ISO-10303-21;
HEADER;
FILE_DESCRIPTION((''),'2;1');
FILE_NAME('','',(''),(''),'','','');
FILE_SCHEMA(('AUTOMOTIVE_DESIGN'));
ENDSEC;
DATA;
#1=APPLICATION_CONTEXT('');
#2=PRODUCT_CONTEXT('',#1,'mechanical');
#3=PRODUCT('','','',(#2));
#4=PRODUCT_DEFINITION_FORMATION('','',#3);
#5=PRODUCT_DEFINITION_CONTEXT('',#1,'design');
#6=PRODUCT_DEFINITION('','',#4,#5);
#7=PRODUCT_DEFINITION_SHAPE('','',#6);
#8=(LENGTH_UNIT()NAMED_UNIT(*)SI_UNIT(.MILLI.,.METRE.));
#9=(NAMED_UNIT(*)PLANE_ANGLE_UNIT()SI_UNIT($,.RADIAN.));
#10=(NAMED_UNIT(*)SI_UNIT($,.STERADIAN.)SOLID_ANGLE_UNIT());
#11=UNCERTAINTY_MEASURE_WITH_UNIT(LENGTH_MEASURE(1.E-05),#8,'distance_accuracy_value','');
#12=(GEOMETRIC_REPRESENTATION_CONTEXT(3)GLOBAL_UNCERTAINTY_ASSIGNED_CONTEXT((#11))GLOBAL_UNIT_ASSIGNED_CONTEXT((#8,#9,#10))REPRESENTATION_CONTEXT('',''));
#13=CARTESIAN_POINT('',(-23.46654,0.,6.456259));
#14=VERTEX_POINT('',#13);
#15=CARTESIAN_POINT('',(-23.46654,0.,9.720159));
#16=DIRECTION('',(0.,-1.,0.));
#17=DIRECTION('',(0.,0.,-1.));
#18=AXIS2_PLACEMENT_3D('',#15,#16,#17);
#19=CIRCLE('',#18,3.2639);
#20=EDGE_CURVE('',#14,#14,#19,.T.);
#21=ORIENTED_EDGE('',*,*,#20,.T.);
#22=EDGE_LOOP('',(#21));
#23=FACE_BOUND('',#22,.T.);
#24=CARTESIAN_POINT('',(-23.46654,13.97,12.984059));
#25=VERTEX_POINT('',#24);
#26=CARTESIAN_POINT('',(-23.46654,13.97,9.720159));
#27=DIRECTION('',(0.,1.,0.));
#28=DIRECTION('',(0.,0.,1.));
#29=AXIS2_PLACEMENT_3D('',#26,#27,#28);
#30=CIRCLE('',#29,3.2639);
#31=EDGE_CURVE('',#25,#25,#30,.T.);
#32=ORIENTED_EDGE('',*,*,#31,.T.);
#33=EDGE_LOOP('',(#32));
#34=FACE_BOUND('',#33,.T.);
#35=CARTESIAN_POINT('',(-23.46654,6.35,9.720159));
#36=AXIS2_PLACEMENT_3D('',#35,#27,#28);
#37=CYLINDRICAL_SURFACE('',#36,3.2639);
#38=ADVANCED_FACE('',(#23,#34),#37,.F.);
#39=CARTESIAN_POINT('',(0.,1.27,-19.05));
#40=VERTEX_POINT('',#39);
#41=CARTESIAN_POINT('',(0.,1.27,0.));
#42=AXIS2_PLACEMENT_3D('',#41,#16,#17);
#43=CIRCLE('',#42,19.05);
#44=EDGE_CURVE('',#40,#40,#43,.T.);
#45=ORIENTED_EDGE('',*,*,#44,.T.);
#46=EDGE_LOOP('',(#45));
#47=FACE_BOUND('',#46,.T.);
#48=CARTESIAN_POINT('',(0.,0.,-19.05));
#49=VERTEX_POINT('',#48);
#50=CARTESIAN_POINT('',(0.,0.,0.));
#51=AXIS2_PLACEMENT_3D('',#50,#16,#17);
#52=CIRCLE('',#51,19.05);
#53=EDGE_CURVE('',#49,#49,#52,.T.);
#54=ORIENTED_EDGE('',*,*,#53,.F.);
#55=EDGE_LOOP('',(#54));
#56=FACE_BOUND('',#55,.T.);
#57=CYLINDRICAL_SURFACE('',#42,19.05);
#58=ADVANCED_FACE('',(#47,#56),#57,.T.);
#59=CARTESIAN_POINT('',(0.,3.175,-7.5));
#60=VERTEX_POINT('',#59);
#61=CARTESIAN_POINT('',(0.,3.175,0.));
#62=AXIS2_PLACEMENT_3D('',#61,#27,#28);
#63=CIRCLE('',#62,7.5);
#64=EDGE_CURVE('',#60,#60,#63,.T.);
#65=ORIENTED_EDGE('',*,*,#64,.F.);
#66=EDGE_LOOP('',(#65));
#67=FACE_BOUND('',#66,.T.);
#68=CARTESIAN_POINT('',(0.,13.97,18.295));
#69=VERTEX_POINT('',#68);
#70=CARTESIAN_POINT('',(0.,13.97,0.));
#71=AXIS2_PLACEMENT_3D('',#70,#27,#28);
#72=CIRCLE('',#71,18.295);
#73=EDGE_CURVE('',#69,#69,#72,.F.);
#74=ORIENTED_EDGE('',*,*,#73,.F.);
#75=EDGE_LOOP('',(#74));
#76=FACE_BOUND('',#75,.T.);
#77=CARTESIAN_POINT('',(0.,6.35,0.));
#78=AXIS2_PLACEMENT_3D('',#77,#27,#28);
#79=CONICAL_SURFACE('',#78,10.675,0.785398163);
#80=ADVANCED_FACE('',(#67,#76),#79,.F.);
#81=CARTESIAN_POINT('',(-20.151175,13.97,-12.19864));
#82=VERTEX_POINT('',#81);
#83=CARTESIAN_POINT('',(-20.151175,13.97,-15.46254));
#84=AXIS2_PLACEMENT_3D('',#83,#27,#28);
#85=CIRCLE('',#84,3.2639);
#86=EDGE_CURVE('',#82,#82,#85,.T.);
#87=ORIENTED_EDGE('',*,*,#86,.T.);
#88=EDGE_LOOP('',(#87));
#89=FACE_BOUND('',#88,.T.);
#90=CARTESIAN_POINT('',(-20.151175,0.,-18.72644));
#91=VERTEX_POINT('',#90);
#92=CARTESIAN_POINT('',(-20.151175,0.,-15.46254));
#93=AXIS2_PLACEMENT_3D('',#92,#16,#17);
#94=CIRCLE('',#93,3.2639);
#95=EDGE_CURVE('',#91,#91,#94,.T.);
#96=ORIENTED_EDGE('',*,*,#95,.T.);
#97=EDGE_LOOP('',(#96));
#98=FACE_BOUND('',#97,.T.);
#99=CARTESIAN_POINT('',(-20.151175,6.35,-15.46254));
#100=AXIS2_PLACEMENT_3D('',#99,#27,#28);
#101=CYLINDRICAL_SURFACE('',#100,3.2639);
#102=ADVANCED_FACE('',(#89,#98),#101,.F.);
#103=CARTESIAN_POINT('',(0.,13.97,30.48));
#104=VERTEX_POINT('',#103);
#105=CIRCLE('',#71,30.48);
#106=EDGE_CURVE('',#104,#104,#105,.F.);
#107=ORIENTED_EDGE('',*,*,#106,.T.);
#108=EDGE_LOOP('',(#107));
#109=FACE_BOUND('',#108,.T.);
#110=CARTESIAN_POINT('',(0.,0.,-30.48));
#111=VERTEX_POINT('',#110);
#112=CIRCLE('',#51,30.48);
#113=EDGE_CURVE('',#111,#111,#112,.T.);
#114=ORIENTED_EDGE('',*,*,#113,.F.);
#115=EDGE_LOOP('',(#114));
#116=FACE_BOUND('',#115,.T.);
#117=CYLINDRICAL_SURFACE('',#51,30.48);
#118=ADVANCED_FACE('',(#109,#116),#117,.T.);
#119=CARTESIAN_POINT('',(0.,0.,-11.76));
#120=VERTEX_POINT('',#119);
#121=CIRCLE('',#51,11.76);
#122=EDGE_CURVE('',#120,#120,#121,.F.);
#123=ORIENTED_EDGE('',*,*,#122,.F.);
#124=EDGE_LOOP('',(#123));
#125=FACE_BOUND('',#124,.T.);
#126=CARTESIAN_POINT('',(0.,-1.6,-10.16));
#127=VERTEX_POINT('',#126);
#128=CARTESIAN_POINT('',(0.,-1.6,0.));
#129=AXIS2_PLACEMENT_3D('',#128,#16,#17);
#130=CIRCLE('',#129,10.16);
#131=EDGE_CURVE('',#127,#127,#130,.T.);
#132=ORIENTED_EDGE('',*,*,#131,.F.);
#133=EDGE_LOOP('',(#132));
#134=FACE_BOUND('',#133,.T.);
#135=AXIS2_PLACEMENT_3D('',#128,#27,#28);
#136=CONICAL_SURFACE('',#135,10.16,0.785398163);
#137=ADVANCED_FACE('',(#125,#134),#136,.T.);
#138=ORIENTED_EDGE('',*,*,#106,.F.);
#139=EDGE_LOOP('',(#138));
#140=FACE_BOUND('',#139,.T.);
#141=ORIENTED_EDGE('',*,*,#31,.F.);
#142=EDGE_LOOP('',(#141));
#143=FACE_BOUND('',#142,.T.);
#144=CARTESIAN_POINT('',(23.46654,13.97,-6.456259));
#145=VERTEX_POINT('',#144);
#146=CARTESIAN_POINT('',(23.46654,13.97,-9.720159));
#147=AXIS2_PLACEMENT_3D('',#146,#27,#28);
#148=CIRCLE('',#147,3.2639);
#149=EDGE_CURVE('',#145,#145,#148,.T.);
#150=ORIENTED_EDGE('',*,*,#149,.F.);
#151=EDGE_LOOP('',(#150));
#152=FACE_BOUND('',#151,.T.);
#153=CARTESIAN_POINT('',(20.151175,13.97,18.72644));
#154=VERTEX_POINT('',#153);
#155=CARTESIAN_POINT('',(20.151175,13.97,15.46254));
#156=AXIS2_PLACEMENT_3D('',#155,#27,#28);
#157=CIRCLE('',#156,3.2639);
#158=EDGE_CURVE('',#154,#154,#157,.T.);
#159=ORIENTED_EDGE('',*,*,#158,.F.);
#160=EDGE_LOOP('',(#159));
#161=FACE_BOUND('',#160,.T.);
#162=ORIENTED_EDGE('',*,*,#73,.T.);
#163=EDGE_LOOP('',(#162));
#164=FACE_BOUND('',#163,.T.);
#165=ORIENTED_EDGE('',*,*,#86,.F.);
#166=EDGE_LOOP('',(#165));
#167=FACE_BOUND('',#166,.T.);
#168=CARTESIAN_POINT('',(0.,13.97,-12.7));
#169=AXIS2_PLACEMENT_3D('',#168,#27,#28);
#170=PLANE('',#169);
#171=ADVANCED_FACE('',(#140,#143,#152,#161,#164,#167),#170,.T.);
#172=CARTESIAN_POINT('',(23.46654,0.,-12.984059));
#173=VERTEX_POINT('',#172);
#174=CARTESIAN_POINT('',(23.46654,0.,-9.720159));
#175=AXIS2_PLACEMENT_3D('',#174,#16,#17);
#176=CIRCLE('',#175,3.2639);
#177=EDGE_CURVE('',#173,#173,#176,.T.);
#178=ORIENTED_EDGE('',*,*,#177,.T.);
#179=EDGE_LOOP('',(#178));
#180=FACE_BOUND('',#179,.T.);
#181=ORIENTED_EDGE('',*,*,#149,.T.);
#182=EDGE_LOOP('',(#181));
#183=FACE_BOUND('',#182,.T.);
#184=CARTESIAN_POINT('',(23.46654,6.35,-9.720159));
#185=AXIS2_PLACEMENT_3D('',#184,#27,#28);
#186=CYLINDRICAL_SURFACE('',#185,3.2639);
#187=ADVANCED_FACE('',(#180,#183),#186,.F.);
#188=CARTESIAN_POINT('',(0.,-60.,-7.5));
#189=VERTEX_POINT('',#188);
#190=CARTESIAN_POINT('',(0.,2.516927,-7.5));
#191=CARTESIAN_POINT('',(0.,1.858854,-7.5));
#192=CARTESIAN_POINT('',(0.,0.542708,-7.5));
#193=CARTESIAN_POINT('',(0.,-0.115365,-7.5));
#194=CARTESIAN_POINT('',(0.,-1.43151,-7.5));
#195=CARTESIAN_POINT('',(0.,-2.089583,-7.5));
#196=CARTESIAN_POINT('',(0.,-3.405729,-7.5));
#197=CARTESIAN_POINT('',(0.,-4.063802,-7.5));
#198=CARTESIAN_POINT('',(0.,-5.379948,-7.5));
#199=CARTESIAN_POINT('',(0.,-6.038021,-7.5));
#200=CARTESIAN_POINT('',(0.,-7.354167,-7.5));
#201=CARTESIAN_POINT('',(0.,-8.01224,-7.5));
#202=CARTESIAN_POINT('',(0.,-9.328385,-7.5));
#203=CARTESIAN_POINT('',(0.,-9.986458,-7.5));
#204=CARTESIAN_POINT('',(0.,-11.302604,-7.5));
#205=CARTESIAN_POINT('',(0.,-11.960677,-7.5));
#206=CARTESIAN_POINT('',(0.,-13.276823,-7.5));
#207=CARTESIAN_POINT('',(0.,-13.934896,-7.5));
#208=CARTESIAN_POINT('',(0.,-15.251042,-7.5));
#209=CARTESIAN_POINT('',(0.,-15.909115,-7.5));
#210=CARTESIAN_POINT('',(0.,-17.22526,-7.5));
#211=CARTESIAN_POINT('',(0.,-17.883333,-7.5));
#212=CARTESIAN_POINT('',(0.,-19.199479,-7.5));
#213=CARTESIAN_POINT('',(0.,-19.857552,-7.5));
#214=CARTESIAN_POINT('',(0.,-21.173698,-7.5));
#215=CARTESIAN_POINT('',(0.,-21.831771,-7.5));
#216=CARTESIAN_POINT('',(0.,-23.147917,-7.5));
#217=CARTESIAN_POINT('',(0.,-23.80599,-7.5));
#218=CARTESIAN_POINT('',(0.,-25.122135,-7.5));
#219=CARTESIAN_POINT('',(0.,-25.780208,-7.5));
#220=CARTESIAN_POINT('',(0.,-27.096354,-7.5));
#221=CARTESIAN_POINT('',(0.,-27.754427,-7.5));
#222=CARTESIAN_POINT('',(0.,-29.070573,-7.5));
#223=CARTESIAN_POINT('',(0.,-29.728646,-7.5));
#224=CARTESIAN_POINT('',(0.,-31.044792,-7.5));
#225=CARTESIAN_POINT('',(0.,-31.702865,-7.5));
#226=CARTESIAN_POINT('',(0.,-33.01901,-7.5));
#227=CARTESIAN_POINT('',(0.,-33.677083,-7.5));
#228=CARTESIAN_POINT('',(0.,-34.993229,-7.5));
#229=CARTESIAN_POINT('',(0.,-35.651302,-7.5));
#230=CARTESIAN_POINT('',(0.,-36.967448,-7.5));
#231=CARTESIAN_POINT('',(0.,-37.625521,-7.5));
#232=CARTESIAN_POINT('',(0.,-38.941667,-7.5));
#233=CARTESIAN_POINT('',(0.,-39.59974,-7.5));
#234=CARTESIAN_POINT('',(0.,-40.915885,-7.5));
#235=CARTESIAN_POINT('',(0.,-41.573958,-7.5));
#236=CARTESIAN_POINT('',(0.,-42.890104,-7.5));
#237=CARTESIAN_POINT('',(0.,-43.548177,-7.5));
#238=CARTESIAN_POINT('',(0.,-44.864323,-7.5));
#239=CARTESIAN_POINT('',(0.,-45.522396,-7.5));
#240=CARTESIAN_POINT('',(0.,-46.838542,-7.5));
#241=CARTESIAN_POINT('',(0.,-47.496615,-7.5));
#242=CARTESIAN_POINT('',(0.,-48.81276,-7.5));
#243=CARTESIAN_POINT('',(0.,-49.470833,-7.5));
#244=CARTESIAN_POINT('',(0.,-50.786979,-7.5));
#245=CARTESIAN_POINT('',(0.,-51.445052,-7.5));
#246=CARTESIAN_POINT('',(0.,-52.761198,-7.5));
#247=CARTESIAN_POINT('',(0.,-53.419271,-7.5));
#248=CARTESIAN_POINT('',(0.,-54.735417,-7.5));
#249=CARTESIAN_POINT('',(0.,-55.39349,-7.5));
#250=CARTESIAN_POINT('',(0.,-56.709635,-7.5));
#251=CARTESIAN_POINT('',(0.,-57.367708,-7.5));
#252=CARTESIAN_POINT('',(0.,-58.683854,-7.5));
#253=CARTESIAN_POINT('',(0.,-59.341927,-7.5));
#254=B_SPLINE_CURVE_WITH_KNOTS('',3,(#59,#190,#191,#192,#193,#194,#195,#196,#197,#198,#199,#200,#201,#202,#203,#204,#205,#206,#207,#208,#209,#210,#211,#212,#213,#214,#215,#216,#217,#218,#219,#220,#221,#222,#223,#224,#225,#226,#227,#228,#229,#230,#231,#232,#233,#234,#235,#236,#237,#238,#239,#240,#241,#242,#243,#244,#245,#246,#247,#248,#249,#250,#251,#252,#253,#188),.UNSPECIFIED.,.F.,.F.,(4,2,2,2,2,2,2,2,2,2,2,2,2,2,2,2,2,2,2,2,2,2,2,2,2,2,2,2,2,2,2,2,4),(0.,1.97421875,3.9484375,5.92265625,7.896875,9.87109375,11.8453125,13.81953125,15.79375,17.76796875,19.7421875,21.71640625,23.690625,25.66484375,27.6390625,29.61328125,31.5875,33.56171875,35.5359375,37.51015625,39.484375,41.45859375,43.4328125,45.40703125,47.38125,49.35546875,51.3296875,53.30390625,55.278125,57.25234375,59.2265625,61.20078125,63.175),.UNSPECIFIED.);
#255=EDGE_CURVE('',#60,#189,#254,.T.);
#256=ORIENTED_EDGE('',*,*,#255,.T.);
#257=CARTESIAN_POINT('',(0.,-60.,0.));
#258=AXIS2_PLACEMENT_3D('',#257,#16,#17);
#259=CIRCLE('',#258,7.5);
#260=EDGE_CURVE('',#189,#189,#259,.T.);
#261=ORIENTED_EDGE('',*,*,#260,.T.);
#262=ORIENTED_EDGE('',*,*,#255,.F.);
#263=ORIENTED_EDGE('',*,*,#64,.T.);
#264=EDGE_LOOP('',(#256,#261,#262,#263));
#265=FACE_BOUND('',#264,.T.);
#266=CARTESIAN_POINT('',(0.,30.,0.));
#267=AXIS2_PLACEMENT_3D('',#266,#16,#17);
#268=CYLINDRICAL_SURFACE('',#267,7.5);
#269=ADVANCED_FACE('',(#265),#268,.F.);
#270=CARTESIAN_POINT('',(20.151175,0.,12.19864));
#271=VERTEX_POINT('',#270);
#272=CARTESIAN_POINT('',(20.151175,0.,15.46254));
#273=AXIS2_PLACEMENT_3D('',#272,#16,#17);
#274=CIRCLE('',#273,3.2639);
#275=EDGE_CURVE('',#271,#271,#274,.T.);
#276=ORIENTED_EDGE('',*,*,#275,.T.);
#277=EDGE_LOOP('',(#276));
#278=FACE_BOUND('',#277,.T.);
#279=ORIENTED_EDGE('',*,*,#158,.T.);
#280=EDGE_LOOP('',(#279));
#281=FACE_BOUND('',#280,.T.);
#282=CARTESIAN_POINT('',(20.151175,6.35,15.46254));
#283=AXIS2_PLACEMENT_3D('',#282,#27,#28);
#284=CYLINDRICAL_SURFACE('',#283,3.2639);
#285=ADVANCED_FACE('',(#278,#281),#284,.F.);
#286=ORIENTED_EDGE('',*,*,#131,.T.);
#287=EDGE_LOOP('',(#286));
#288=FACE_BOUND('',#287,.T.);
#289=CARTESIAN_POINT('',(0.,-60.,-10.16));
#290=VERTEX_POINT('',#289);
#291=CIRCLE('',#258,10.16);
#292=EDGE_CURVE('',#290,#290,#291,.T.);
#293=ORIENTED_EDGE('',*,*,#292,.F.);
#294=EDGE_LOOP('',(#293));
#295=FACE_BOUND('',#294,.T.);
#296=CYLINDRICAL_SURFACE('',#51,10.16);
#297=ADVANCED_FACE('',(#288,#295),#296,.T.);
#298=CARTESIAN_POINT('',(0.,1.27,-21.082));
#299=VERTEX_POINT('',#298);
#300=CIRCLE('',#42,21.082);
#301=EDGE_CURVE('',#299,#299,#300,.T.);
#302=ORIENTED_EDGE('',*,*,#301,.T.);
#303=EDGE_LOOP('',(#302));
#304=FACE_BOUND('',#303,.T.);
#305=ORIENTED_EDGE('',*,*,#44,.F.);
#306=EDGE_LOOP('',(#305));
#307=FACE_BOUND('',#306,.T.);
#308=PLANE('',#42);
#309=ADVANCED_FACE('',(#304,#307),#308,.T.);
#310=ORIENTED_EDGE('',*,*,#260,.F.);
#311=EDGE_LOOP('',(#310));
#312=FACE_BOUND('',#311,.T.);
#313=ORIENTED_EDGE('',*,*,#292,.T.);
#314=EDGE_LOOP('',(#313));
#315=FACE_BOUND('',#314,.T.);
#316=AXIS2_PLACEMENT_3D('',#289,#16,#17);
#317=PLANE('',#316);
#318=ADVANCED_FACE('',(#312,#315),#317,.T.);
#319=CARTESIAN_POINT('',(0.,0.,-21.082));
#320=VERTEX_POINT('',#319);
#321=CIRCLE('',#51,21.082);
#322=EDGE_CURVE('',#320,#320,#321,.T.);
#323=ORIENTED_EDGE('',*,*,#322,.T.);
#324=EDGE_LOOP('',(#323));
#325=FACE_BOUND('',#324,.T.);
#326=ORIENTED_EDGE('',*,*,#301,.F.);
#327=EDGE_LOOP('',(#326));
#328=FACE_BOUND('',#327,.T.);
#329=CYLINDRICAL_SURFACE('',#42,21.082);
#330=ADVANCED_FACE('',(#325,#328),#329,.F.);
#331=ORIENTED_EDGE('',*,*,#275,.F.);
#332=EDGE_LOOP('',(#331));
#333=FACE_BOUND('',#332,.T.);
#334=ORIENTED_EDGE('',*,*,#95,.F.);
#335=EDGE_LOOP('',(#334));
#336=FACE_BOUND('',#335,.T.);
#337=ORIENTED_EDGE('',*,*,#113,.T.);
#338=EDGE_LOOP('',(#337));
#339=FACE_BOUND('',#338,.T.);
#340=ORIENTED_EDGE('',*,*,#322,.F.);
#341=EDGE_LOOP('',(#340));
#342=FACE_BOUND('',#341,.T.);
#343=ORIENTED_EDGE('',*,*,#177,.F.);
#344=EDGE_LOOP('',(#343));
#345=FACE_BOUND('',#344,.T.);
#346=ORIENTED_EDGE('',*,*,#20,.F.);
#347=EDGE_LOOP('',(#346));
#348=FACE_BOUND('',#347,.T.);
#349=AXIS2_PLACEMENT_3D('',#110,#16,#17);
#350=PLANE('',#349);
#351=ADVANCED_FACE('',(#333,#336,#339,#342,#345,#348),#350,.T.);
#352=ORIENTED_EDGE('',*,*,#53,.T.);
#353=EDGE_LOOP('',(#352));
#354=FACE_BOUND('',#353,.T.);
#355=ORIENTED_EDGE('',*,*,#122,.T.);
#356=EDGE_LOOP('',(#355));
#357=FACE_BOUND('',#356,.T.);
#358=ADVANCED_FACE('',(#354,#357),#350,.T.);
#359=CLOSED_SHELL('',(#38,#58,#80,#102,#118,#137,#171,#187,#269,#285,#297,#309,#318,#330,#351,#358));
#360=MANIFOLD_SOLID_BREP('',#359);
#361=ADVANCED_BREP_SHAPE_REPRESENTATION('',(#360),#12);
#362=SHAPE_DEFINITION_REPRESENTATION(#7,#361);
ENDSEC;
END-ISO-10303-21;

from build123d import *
from build123d.topology import SkipClean

# Parameters (mm, degrees)
SKETCH5_R                   = 7.5
CUT_EXTRUDE1_DEPTH          = 90
SKETCH6_R                   = 3.5
CUT_EXTRUDE2_DEPTH          = 20
CIRPATTERN1_COUNT           = 6
SKETCH11_R                  = 3.18
CUT_EXTRUDE4_DEPTH          = 101.105860558
SKETCH23_R                  = 30.48
CUT_EXTRUDE6_DEPTH          = 80.122584091
F_1_4_CLEARANCE_HOLE1_D     = 6.5278
F_1_4_CLEARANCE_HOLE1_DEPTH = 15.4203
F_1_4_CLEARANCE_HOLE1_TIP   = 1.961148974
CHAMFER1_SIZE               = 3.175
SKETCH26_OUTSIDE_W          = 84.718
SKETCH26_OUTSIDE_H          = 84.718
SKETCH26_OUTSIDE_R          = 15
FOR_TURNING_EASE_DEPTH      = 74.878689756
DELETEFACE2_START           = -60.0000001
DELETEFACE2_OUTLINE_R       = 15
DELETEFACE2_OUTLINE_R_2     = 10.16
DELETEFACE2_DEPTH           = 60.0000001
CHAMFER3_SIZE               = 1.6
SKETCH30_R                  = 21.082
SKETCH30_R_2                = 19.05
GASKET_GROOVE_DEPTH         = 1.27
MOVE_START                  = 6.35
MOVE_FACE3_OUTLINE_R        = 30.48
MOVE_FACE3_OUTLINE_R_2      = 3.2639
MOVE_FACE3_DEPTH            = 7.62


with BuildPart() as part:
    # Sketch1 → Revolve1 (revolve)
    with BuildSketch(Plane(origin=(0, 0, 0), x_dir=(0, 0, -1), z_dir=(1, 0, 0))):
        Polygon((0, 30.35), (12.7, 30.35), (12.7, 6.35), (30.48, 6.35), (30.48, 0), (15.68, 0), (10.16, -20.600920458), (10.16, -60), (0, -60), align=None)
    revolve(axis=Axis((0, 0, 0), (0, 1, 0)))

    # Sketch5 → Cut-Extrude1 (cut)
    with BuildSketch(Plane.XZ.offset(60)):
        with Locations(Location((0, 0, 0), (0, 0, 270))):
            Circle(SKETCH5_R)
    extrude(amount=-CUT_EXTRUDE1_DEPTH, mode=Mode.SUBTRACT)

    # Sketch6 → Cut-Extrude2 (cut, symmetric)
    with BuildSketch(Plane.XY):
        with Locations((0, 16.659966967)):
            Circle(SKETCH6_R)
    cut_extrude2 = extrude(amount=CUT_EXTRUDE2_DEPTH, both=True, mode=Mode.SUBTRACT)

    # CirPattern1: Cut-Extrude2 ×6 about axis
    cirpattern1_axis = Axis((0, 30.35, 0), (0, -1, 0))
    for i in range(1, CIRPATTERN1_COUNT):
        add(cut_extrude2.rotate(cirpattern1_axis, i * 360 / CIRPATTERN1_COUNT), mode=Mode.SUBTRACT)

    # Sketch11 → Cut-Extrude4 (cut, through all)
    with BuildSketch(Plane(origin=(0, 30.35, 0), x_dir=(1, 0, 0), z_dir=(0, 1, 0))):
        with Locations(Location((0, 0, 0), (0, 0, 270))):
            Circle(SKETCH11_R)
    extrude(amount=-CUT_EXTRUDE4_DEPTH, mode=Mode.SUBTRACT)

    # Sketch23 → Cut-Extrude6 (cut, through all)
    with BuildSketch(Plane(origin=(0, 6.35, 0), x_dir=(1, 0, 0), z_dir=(0, 1, 0))):
        with Locations(Location((0, 0, 0), (0, 0, 90))):
            Circle(SKETCH23_R)
    extrude(amount=CUT_EXTRUDE6_DEPTH, mode=Mode.SUBTRACT)

    # 1/4 Clearance Hole1
    with Locations(Plane(origin=(0, 6.35, 0), x_dir=(1, 0, 0), z_dir=(0, 1, 0))):
        with Locations((-20.151174843, 15.462540297), (23.466540126, 9.720159182), (20.151174843, -15.462540297), (-23.466540126, -9.720159182)):
            Hole(F_1_4_CLEARANCE_HOLE1_D / 2, depth=F_1_4_CLEARANCE_HOLE1_DEPTH)
            with Locations((0, 0, -(F_1_4_CLEARANCE_HOLE1_DEPTH + F_1_4_CLEARANCE_HOLE1_TIP / 2))):  # 118° drill point
                Cone(0, F_1_4_CLEARANCE_HOLE1_D / 2, F_1_4_CLEARANCE_HOLE1_TIP, mode=Mode.SUBTRACT)

    # Chamfer1
    chamfer1_edges = [part.edges().sort_by_distance(p)[0] for p in [
        (0, 6.35, 7.5),
    ]]
    chamfer(chamfer1_edges, length=CHAMFER1_SIZE)

    # Sketch26 outside → for-turning-ease (cut, through all)
    with BuildSketch(Plane.XZ):
        Rectangle(SKETCH26_OUTSIDE_W, SKETCH26_OUTSIDE_H)
        with Locations(Location((0, 0, 0), (0, 0, 90))):
            Circle(SKETCH26_OUTSIDE_R, mode=Mode.SUBTRACT)
    extrude(amount=FOR_TURNING_EASE_DEPTH, mode=Mode.SUBTRACT)

    # DeleteFace2: read off the stored shape, not the designer's step
    # DeleteFace2 outline → DeleteFace2 (cut)
    with BuildSketch(Plane(origin=(0, 0, 0), x_dir=(1, 0, 0), z_dir=(0, 1, 0)).offset(DELETEFACE2_START)):
        Circle(DELETEFACE2_OUTLINE_R)
        Circle(DELETEFACE2_OUTLINE_R_2, mode=Mode.SUBTRACT)
    extrude(amount=DELETEFACE2_DEPTH, mode=Mode.SUBTRACT)

    # Chamfer3
    # the kernel refuses this chamfer: 1.6 mm, written as the material it adds along each edge
    with BuildSketch(Plane(origin=(0, 0, 0), x_dir=(1, 0, 0), z_dir=(0, 0, 1))) as chamfer3_piece_1:
        Polygon((10.16 + CHAMFER3_SIZE, 0), (10.16, -CHAMFER3_SIZE), (10.16, 0), align=None)
    revolve(axis=Axis((0, 0, 0), (0, 1, 0)))

    # Sketch30 → gasket_groove (cut)
    with BuildSketch(Plane.XZ):
        with Locations(Location((0, 0, 0), (0, 0, 270))):
            Circle(SKETCH30_R)
        with Locations(Location((0, 0, 0), (0, 0, 270))):
            Circle(SKETCH30_R_2, mode=Mode.SUBTRACT)
    extrude(amount=-GASKET_GROOVE_DEPTH, mode=Mode.SUBTRACT)

    # Move Face3: read off the stored shape, not the designer's step
    # Move Face3 outline → Move Face3 (add)
    with SkipClean():  # the faces are left unmerged after this step: merging them gives an invalid solid
        with BuildSketch(Plane(origin=(0, 0, 0), x_dir=(1, 0, 0), z_dir=(0, 1, 0)).offset(MOVE_START)):
            Circle(MOVE_FACE3_OUTLINE_R)
            with Locations((-23.466540126, -9.720159182)):
                Circle(MOVE_FACE3_OUTLINE_R_2, mode=Mode.SUBTRACT)
            with Locations((20.151174843, -15.462540297)):
                Circle(MOVE_FACE3_OUTLINE_R_2, mode=Mode.SUBTRACT)
            with Locations((-20.151174843, 15.462540297)):
                Circle(MOVE_FACE3_OUTLINE_R_2, mode=Mode.SUBTRACT)
            with Locations((23.466540126, 9.720159182)):
                Circle(MOVE_FACE3_OUTLINE_R_2, mode=Mode.SUBTRACT)
        extrude(amount=MOVE_FACE3_DEPTH)
    add(part.part.scale(1), mode=Mode.REPLACE)  # the faces are merged on a copy

    # Move Face3 2 outline → Move Face3 2 (revolve, cut)
    with SkipClean():  # the faces are left unmerged after this step: merging them gives an invalid solid
        with BuildSketch(Plane.XY):
            Polygon((18.295, 13.97), (0, 13.97), (0, 6.35), (10.675, 6.35), align=None)
        revolve(axis=Axis((0, 0, 0), (0, 1, 0)), mode=Mode.SUBTRACT)


solid = part.part
